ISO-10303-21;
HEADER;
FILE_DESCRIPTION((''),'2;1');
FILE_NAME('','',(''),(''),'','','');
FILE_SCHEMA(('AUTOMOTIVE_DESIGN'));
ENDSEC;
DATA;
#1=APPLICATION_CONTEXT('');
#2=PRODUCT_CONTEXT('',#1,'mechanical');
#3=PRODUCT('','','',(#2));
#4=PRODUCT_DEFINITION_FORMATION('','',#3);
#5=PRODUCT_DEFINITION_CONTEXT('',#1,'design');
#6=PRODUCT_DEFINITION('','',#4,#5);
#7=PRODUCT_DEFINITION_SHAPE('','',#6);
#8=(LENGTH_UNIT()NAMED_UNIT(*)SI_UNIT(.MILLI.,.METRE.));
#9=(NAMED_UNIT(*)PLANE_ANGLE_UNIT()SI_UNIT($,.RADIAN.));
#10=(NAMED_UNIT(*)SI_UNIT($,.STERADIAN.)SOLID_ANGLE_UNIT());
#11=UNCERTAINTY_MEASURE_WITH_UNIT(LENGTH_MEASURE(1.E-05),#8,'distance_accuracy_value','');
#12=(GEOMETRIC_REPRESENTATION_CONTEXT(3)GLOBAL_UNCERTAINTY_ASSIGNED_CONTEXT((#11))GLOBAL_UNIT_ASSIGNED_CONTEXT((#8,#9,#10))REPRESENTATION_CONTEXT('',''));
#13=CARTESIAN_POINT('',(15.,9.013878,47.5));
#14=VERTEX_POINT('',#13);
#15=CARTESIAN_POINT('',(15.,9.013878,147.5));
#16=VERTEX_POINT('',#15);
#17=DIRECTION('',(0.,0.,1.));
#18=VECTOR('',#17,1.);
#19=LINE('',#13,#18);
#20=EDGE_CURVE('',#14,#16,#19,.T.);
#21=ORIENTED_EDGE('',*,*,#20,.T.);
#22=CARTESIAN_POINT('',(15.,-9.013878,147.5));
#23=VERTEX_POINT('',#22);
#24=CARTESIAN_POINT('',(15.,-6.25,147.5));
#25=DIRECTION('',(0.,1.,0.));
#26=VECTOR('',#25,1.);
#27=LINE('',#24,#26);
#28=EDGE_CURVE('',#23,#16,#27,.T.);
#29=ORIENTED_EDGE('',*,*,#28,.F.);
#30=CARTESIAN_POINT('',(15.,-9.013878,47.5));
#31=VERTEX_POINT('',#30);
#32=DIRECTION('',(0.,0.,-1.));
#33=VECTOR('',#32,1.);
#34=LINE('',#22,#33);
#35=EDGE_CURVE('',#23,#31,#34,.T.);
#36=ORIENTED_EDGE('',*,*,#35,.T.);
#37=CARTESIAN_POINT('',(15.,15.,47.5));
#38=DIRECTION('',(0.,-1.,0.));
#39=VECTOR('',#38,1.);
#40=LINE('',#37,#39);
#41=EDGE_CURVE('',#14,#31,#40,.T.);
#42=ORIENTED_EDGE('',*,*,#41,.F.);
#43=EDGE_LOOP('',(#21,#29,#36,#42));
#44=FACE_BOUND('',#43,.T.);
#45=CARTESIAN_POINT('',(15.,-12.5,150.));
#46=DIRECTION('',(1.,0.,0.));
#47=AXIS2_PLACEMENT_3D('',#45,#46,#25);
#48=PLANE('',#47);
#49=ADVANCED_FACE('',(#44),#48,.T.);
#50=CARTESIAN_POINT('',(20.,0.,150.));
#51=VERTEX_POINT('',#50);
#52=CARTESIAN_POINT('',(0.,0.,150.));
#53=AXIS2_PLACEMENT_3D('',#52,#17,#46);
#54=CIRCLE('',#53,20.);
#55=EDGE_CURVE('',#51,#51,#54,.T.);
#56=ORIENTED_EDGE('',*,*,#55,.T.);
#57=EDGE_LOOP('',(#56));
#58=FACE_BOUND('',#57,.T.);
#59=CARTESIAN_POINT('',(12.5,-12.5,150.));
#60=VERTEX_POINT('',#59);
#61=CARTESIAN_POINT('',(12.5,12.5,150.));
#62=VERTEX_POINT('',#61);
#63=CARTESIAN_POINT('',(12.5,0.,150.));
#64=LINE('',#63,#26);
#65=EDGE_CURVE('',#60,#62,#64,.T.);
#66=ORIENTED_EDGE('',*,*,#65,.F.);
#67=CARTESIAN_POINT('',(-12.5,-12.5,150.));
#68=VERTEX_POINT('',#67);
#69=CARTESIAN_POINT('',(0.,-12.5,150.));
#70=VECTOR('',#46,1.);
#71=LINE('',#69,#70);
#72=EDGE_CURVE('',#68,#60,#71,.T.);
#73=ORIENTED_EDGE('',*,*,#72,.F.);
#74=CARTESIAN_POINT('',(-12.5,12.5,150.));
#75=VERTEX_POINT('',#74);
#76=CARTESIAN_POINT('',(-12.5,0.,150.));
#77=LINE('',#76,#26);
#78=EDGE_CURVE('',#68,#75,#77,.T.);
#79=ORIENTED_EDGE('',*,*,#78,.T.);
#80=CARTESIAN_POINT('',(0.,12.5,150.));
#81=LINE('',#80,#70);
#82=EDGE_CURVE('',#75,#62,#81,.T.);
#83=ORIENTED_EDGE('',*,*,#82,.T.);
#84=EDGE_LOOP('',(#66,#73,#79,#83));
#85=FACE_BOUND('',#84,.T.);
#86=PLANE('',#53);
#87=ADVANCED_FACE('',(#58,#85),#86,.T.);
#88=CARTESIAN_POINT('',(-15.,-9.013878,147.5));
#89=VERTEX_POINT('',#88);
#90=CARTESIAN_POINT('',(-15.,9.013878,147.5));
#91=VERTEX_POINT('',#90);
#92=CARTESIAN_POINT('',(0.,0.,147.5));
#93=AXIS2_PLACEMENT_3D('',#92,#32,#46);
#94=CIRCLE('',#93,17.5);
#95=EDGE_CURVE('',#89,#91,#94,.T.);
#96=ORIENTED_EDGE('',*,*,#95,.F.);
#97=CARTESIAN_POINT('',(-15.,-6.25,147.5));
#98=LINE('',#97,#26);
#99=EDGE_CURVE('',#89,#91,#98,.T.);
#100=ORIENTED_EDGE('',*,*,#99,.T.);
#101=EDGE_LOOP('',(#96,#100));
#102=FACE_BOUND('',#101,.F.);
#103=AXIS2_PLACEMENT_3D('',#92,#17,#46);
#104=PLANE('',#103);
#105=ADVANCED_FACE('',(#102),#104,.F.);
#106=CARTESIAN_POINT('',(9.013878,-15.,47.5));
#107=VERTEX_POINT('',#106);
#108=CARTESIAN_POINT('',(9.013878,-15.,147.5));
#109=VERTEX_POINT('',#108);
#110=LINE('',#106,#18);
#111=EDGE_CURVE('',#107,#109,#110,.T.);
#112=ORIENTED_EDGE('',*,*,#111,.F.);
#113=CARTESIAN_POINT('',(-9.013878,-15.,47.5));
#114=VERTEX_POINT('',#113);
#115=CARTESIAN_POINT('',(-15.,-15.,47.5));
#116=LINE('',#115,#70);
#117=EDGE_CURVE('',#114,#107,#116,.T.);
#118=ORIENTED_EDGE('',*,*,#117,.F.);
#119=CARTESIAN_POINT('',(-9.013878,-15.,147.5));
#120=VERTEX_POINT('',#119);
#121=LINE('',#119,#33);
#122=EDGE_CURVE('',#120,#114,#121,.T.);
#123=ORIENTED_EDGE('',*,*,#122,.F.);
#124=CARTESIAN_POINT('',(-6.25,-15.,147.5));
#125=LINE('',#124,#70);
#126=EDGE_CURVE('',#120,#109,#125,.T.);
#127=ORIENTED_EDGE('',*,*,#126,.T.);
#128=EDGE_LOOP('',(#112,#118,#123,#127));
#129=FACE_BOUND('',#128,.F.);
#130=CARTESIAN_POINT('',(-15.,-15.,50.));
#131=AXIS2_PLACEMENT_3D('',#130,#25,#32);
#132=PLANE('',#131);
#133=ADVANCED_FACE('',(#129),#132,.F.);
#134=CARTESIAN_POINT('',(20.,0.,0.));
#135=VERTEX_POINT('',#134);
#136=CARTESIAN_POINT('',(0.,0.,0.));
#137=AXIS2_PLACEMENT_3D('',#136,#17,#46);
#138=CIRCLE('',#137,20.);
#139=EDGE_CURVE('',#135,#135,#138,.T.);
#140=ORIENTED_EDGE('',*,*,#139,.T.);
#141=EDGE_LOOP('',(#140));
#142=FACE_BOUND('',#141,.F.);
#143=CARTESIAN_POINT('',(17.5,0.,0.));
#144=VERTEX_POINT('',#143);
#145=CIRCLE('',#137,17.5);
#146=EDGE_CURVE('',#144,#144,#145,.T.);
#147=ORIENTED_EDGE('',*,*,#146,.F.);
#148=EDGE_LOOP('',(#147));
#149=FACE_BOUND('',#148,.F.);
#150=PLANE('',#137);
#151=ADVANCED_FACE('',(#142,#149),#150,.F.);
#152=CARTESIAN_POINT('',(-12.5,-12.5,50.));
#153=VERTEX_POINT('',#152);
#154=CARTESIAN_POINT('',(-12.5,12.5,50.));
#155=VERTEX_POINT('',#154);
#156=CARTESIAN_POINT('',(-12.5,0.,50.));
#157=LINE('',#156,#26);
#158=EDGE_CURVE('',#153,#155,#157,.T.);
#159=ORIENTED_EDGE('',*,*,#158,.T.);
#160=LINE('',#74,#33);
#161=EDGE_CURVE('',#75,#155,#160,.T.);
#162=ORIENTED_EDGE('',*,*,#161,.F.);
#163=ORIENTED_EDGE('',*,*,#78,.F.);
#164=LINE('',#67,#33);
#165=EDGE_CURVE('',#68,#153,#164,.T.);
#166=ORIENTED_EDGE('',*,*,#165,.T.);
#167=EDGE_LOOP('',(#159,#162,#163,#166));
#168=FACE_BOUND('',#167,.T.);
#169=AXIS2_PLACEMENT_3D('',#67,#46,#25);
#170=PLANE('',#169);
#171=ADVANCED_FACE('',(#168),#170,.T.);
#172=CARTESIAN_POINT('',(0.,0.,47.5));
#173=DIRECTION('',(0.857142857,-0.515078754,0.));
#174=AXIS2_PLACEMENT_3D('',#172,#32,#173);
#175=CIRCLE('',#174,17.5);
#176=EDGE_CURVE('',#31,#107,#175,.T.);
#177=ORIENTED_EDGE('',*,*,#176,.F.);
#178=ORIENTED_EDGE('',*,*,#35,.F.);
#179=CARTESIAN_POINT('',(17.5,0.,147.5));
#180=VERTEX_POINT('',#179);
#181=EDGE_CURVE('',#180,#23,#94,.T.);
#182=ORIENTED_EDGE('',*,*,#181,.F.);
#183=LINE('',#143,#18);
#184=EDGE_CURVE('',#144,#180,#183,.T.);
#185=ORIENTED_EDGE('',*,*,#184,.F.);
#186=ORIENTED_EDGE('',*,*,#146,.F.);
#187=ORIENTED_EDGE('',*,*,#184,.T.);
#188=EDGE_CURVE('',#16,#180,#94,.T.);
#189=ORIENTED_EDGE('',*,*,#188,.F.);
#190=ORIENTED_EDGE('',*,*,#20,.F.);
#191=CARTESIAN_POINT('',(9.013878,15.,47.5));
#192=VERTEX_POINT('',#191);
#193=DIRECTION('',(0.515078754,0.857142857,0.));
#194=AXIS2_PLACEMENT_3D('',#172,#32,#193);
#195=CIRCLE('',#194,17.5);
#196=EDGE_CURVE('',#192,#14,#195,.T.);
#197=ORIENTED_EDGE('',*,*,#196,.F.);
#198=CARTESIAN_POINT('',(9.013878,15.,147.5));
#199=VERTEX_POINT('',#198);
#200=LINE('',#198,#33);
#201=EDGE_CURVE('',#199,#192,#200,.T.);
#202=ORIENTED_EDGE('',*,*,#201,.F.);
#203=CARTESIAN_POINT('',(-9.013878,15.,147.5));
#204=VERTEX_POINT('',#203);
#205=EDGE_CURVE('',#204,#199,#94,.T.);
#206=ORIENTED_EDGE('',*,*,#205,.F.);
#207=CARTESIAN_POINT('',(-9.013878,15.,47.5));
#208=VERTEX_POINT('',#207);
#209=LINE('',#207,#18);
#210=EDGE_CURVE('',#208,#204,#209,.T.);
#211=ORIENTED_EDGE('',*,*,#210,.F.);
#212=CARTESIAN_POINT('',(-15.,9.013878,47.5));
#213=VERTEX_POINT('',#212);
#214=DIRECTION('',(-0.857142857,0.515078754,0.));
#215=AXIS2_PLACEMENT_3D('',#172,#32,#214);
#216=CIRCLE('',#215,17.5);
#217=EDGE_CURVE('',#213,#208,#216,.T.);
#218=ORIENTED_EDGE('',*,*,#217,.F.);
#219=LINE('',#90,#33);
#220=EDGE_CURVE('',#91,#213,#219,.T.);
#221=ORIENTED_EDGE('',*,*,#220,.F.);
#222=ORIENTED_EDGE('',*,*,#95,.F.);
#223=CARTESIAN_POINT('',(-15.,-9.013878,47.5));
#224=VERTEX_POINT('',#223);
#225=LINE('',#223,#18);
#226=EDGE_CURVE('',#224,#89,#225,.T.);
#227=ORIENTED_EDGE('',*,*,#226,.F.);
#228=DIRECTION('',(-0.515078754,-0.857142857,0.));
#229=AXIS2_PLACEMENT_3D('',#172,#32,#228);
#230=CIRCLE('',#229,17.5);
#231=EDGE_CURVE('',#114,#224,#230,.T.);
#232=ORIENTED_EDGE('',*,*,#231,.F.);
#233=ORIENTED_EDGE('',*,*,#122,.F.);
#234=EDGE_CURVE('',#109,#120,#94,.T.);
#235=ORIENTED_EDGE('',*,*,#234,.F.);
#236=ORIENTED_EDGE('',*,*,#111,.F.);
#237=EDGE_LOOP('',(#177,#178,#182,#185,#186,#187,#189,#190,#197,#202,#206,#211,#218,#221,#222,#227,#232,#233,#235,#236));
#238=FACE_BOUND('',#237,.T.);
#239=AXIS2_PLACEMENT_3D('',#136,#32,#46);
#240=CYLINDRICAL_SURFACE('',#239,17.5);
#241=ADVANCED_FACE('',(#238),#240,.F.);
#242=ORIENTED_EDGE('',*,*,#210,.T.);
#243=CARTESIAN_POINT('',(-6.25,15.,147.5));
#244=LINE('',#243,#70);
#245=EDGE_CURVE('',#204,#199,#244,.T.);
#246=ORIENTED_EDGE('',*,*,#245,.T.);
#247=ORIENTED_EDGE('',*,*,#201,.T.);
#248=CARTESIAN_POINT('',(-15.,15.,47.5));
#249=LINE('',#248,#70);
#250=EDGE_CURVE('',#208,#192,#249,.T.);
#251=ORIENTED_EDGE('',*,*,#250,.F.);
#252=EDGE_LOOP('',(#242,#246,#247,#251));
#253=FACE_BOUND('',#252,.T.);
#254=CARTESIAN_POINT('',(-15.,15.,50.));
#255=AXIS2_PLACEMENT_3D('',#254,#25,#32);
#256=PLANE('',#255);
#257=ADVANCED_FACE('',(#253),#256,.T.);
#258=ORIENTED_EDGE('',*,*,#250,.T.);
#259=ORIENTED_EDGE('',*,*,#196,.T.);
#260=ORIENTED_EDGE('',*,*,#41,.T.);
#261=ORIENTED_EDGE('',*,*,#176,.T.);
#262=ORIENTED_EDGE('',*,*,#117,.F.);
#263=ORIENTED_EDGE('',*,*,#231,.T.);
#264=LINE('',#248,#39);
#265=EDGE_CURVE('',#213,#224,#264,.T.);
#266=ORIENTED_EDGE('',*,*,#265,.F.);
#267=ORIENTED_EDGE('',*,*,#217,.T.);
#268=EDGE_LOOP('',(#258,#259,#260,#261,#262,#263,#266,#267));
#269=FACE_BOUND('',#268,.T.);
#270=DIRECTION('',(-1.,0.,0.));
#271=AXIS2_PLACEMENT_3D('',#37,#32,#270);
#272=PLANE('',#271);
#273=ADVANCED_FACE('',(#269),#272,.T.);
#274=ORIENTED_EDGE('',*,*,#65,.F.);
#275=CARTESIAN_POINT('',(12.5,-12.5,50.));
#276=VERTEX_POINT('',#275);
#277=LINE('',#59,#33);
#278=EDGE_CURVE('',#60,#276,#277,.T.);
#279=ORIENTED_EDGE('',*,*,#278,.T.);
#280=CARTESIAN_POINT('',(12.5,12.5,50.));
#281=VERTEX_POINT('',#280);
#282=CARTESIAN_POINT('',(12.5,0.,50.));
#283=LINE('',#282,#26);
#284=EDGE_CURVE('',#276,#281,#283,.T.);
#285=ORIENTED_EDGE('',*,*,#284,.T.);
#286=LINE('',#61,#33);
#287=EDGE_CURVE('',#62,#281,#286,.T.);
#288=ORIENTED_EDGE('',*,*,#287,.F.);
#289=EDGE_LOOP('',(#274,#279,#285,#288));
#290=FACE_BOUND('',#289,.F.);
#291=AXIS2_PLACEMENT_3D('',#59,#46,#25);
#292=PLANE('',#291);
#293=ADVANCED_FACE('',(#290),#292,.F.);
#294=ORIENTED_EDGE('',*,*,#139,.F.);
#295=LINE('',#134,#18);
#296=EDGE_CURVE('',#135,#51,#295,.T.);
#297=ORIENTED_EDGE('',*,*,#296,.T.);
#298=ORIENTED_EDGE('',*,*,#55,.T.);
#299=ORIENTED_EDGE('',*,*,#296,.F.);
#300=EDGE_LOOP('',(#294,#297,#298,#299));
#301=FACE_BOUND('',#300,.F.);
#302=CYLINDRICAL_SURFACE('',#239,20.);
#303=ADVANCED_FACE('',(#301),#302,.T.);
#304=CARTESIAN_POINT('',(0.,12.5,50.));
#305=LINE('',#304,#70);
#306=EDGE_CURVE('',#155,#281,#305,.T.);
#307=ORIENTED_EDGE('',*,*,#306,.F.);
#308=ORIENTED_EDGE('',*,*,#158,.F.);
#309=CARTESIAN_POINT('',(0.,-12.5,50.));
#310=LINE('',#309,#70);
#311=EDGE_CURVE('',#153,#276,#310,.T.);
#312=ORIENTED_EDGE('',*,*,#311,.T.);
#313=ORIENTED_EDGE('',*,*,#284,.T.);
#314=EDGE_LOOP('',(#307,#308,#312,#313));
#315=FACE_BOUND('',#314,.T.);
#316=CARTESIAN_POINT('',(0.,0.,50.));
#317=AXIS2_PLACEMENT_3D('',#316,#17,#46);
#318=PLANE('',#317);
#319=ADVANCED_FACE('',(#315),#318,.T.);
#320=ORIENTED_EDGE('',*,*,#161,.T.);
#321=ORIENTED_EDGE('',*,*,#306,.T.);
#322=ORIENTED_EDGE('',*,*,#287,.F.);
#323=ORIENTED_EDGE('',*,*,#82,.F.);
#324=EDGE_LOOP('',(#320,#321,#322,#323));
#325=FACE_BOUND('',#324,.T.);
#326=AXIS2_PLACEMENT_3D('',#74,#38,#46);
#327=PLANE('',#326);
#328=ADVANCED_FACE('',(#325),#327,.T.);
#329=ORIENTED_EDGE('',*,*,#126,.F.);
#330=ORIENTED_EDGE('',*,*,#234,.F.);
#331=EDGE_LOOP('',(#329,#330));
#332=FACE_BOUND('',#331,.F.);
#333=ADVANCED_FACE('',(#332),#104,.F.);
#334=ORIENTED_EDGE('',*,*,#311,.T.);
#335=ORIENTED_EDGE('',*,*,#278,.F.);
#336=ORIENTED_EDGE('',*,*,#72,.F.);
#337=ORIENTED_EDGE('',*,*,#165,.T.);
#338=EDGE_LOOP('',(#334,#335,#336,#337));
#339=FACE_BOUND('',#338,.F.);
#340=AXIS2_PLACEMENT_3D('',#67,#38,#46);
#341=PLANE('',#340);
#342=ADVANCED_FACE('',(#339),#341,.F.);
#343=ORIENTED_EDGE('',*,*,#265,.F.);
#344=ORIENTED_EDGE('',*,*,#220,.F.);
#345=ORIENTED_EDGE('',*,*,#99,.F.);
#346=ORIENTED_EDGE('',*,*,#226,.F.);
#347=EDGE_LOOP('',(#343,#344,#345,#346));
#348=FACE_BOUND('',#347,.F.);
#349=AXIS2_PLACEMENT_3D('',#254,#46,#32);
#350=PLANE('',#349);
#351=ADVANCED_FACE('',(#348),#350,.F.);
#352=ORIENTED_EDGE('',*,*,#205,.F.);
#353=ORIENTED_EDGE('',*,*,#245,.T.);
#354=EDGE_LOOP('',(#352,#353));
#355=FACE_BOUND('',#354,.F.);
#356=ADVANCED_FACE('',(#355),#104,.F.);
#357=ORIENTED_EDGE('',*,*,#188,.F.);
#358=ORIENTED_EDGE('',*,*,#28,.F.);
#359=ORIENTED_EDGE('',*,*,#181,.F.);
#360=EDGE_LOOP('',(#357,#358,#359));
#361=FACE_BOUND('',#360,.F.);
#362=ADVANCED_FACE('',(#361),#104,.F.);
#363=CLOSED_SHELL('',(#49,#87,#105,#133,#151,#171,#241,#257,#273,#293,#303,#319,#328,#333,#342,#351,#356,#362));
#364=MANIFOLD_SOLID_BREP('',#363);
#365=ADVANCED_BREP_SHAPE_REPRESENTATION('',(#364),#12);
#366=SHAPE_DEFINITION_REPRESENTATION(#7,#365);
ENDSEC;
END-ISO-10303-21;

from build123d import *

# Parameters (mm, degrees)
F0_R        = 20
F0_R_2      = 7.5
F1_DEPTH    = 150
F2_W        = 25
F2_H        = 25
F3_DEPTH    = 100
F4_T        = 2.5
F4_T3_DEPTH = 105
F4_T5_DEPTH = 30
F4_T7_DEPTH = 30


# Not quite as in the source:
# - a shell that OpenCascade refuses in one call is made with other operations: the cavity is built on its own and cut out
# - a feature names something its author has since deleted; it is built from what else it names


with BuildPart() as f1:
    # F0 (on Top) → F1 (new body)
    with BuildSketch(Plane.XY):
        Circle(F0_R)
        Circle(F0_R_2, mode=Mode.SUBTRACT)
        Circle(F0_R_2)
    extrude(amount=F1_DEPTH)

    # F2 (on face) → F3 (cut)
    with BuildSketch(Plane.XY.offset(150)):
        Rectangle(F2_W, F2_H)
    extrude(amount=-F3_DEPTH, mode=Mode.SUBTRACT)

    # F4: shell of thickness 2.5, made by hand


with BuildPart() as f4_core1:
    # F4_t2: copy of F1
    add(f1.part)

    # the walls: a layer under each face that stays
    f4_faces = [f4_core1.faces().sort_by_distance(p)[0] for p in [
        (-20, 0, 75),
        (-13.3333333333, -13.3333333333, 150),
        (-12.5, 0, 100),
        (0, -12.5, 100),
        (12.5, 0, 100),
        (0, 12.5, 100),
        (0, 0, 50),
    ]]
    thicken(f4_faces, amount=-F4_T, mode=Mode.SUBTRACT)

    # F4_s4 → F4_t3 (cut)
    with BuildSketch(Plane.XY.offset(47.5)):
        Polygon((-12.475, 12.475), (-15, 12.5), (-15, 15), (-12.5, 15), align=None)
        Polygon((-12.475, -12.475), (-15, -12.5), (-15, -15), (-12.5, -15), align=None)
        Polygon((12.475, -12.475), (12.5, -15), (15, -15), (15, -12.5), align=None)
        Polygon((12.475, 12.475), (15, 12.5), (15, 15), (12.5, 15), align=None)
    extrude(amount=F4_T3_DEPTH, mode=Mode.SUBTRACT)

    # F4_s6 → F4_t5 (cut)
    with BuildSketch(Plane.XZ.offset(-15)):
        Polygon((-12.475, 50.025), (-15, 50), (-15, 47.5), (-12.5, 47.5), align=None)
        Polygon((12.475, 50.025), (15, 50), (15, 47.5), (12.5, 47.5), align=None)
    extrude(amount=F4_T5_DEPTH, mode=Mode.SUBTRACT)

    # F4_s8 → F4_t7 (cut)
    with BuildSketch(Plane.YZ.offset(-15)):
        Polygon((-12.475, 50.025), (-15, 50), (-15, 47.5), (-12.5, 47.5), align=None)
        Polygon((12.475, 50.025), (15, 50), (15, 47.5), (12.5, 47.5), align=None)
    extrude(amount=F4_T7_DEPTH, mode=Mode.SUBTRACT)


with BuildPart() as f1_1:
    add(f1.part)

    # what is left inside the walls is the cavity
    f4_cavity = [f4_core1.part.solids().sort_by_distance(p)[0] for p in [
        (-17.475, 0, 98.333333),
    ]]
    add(f4_cavity, mode=Mode.SUBTRACT)


solid = f1_1.part
